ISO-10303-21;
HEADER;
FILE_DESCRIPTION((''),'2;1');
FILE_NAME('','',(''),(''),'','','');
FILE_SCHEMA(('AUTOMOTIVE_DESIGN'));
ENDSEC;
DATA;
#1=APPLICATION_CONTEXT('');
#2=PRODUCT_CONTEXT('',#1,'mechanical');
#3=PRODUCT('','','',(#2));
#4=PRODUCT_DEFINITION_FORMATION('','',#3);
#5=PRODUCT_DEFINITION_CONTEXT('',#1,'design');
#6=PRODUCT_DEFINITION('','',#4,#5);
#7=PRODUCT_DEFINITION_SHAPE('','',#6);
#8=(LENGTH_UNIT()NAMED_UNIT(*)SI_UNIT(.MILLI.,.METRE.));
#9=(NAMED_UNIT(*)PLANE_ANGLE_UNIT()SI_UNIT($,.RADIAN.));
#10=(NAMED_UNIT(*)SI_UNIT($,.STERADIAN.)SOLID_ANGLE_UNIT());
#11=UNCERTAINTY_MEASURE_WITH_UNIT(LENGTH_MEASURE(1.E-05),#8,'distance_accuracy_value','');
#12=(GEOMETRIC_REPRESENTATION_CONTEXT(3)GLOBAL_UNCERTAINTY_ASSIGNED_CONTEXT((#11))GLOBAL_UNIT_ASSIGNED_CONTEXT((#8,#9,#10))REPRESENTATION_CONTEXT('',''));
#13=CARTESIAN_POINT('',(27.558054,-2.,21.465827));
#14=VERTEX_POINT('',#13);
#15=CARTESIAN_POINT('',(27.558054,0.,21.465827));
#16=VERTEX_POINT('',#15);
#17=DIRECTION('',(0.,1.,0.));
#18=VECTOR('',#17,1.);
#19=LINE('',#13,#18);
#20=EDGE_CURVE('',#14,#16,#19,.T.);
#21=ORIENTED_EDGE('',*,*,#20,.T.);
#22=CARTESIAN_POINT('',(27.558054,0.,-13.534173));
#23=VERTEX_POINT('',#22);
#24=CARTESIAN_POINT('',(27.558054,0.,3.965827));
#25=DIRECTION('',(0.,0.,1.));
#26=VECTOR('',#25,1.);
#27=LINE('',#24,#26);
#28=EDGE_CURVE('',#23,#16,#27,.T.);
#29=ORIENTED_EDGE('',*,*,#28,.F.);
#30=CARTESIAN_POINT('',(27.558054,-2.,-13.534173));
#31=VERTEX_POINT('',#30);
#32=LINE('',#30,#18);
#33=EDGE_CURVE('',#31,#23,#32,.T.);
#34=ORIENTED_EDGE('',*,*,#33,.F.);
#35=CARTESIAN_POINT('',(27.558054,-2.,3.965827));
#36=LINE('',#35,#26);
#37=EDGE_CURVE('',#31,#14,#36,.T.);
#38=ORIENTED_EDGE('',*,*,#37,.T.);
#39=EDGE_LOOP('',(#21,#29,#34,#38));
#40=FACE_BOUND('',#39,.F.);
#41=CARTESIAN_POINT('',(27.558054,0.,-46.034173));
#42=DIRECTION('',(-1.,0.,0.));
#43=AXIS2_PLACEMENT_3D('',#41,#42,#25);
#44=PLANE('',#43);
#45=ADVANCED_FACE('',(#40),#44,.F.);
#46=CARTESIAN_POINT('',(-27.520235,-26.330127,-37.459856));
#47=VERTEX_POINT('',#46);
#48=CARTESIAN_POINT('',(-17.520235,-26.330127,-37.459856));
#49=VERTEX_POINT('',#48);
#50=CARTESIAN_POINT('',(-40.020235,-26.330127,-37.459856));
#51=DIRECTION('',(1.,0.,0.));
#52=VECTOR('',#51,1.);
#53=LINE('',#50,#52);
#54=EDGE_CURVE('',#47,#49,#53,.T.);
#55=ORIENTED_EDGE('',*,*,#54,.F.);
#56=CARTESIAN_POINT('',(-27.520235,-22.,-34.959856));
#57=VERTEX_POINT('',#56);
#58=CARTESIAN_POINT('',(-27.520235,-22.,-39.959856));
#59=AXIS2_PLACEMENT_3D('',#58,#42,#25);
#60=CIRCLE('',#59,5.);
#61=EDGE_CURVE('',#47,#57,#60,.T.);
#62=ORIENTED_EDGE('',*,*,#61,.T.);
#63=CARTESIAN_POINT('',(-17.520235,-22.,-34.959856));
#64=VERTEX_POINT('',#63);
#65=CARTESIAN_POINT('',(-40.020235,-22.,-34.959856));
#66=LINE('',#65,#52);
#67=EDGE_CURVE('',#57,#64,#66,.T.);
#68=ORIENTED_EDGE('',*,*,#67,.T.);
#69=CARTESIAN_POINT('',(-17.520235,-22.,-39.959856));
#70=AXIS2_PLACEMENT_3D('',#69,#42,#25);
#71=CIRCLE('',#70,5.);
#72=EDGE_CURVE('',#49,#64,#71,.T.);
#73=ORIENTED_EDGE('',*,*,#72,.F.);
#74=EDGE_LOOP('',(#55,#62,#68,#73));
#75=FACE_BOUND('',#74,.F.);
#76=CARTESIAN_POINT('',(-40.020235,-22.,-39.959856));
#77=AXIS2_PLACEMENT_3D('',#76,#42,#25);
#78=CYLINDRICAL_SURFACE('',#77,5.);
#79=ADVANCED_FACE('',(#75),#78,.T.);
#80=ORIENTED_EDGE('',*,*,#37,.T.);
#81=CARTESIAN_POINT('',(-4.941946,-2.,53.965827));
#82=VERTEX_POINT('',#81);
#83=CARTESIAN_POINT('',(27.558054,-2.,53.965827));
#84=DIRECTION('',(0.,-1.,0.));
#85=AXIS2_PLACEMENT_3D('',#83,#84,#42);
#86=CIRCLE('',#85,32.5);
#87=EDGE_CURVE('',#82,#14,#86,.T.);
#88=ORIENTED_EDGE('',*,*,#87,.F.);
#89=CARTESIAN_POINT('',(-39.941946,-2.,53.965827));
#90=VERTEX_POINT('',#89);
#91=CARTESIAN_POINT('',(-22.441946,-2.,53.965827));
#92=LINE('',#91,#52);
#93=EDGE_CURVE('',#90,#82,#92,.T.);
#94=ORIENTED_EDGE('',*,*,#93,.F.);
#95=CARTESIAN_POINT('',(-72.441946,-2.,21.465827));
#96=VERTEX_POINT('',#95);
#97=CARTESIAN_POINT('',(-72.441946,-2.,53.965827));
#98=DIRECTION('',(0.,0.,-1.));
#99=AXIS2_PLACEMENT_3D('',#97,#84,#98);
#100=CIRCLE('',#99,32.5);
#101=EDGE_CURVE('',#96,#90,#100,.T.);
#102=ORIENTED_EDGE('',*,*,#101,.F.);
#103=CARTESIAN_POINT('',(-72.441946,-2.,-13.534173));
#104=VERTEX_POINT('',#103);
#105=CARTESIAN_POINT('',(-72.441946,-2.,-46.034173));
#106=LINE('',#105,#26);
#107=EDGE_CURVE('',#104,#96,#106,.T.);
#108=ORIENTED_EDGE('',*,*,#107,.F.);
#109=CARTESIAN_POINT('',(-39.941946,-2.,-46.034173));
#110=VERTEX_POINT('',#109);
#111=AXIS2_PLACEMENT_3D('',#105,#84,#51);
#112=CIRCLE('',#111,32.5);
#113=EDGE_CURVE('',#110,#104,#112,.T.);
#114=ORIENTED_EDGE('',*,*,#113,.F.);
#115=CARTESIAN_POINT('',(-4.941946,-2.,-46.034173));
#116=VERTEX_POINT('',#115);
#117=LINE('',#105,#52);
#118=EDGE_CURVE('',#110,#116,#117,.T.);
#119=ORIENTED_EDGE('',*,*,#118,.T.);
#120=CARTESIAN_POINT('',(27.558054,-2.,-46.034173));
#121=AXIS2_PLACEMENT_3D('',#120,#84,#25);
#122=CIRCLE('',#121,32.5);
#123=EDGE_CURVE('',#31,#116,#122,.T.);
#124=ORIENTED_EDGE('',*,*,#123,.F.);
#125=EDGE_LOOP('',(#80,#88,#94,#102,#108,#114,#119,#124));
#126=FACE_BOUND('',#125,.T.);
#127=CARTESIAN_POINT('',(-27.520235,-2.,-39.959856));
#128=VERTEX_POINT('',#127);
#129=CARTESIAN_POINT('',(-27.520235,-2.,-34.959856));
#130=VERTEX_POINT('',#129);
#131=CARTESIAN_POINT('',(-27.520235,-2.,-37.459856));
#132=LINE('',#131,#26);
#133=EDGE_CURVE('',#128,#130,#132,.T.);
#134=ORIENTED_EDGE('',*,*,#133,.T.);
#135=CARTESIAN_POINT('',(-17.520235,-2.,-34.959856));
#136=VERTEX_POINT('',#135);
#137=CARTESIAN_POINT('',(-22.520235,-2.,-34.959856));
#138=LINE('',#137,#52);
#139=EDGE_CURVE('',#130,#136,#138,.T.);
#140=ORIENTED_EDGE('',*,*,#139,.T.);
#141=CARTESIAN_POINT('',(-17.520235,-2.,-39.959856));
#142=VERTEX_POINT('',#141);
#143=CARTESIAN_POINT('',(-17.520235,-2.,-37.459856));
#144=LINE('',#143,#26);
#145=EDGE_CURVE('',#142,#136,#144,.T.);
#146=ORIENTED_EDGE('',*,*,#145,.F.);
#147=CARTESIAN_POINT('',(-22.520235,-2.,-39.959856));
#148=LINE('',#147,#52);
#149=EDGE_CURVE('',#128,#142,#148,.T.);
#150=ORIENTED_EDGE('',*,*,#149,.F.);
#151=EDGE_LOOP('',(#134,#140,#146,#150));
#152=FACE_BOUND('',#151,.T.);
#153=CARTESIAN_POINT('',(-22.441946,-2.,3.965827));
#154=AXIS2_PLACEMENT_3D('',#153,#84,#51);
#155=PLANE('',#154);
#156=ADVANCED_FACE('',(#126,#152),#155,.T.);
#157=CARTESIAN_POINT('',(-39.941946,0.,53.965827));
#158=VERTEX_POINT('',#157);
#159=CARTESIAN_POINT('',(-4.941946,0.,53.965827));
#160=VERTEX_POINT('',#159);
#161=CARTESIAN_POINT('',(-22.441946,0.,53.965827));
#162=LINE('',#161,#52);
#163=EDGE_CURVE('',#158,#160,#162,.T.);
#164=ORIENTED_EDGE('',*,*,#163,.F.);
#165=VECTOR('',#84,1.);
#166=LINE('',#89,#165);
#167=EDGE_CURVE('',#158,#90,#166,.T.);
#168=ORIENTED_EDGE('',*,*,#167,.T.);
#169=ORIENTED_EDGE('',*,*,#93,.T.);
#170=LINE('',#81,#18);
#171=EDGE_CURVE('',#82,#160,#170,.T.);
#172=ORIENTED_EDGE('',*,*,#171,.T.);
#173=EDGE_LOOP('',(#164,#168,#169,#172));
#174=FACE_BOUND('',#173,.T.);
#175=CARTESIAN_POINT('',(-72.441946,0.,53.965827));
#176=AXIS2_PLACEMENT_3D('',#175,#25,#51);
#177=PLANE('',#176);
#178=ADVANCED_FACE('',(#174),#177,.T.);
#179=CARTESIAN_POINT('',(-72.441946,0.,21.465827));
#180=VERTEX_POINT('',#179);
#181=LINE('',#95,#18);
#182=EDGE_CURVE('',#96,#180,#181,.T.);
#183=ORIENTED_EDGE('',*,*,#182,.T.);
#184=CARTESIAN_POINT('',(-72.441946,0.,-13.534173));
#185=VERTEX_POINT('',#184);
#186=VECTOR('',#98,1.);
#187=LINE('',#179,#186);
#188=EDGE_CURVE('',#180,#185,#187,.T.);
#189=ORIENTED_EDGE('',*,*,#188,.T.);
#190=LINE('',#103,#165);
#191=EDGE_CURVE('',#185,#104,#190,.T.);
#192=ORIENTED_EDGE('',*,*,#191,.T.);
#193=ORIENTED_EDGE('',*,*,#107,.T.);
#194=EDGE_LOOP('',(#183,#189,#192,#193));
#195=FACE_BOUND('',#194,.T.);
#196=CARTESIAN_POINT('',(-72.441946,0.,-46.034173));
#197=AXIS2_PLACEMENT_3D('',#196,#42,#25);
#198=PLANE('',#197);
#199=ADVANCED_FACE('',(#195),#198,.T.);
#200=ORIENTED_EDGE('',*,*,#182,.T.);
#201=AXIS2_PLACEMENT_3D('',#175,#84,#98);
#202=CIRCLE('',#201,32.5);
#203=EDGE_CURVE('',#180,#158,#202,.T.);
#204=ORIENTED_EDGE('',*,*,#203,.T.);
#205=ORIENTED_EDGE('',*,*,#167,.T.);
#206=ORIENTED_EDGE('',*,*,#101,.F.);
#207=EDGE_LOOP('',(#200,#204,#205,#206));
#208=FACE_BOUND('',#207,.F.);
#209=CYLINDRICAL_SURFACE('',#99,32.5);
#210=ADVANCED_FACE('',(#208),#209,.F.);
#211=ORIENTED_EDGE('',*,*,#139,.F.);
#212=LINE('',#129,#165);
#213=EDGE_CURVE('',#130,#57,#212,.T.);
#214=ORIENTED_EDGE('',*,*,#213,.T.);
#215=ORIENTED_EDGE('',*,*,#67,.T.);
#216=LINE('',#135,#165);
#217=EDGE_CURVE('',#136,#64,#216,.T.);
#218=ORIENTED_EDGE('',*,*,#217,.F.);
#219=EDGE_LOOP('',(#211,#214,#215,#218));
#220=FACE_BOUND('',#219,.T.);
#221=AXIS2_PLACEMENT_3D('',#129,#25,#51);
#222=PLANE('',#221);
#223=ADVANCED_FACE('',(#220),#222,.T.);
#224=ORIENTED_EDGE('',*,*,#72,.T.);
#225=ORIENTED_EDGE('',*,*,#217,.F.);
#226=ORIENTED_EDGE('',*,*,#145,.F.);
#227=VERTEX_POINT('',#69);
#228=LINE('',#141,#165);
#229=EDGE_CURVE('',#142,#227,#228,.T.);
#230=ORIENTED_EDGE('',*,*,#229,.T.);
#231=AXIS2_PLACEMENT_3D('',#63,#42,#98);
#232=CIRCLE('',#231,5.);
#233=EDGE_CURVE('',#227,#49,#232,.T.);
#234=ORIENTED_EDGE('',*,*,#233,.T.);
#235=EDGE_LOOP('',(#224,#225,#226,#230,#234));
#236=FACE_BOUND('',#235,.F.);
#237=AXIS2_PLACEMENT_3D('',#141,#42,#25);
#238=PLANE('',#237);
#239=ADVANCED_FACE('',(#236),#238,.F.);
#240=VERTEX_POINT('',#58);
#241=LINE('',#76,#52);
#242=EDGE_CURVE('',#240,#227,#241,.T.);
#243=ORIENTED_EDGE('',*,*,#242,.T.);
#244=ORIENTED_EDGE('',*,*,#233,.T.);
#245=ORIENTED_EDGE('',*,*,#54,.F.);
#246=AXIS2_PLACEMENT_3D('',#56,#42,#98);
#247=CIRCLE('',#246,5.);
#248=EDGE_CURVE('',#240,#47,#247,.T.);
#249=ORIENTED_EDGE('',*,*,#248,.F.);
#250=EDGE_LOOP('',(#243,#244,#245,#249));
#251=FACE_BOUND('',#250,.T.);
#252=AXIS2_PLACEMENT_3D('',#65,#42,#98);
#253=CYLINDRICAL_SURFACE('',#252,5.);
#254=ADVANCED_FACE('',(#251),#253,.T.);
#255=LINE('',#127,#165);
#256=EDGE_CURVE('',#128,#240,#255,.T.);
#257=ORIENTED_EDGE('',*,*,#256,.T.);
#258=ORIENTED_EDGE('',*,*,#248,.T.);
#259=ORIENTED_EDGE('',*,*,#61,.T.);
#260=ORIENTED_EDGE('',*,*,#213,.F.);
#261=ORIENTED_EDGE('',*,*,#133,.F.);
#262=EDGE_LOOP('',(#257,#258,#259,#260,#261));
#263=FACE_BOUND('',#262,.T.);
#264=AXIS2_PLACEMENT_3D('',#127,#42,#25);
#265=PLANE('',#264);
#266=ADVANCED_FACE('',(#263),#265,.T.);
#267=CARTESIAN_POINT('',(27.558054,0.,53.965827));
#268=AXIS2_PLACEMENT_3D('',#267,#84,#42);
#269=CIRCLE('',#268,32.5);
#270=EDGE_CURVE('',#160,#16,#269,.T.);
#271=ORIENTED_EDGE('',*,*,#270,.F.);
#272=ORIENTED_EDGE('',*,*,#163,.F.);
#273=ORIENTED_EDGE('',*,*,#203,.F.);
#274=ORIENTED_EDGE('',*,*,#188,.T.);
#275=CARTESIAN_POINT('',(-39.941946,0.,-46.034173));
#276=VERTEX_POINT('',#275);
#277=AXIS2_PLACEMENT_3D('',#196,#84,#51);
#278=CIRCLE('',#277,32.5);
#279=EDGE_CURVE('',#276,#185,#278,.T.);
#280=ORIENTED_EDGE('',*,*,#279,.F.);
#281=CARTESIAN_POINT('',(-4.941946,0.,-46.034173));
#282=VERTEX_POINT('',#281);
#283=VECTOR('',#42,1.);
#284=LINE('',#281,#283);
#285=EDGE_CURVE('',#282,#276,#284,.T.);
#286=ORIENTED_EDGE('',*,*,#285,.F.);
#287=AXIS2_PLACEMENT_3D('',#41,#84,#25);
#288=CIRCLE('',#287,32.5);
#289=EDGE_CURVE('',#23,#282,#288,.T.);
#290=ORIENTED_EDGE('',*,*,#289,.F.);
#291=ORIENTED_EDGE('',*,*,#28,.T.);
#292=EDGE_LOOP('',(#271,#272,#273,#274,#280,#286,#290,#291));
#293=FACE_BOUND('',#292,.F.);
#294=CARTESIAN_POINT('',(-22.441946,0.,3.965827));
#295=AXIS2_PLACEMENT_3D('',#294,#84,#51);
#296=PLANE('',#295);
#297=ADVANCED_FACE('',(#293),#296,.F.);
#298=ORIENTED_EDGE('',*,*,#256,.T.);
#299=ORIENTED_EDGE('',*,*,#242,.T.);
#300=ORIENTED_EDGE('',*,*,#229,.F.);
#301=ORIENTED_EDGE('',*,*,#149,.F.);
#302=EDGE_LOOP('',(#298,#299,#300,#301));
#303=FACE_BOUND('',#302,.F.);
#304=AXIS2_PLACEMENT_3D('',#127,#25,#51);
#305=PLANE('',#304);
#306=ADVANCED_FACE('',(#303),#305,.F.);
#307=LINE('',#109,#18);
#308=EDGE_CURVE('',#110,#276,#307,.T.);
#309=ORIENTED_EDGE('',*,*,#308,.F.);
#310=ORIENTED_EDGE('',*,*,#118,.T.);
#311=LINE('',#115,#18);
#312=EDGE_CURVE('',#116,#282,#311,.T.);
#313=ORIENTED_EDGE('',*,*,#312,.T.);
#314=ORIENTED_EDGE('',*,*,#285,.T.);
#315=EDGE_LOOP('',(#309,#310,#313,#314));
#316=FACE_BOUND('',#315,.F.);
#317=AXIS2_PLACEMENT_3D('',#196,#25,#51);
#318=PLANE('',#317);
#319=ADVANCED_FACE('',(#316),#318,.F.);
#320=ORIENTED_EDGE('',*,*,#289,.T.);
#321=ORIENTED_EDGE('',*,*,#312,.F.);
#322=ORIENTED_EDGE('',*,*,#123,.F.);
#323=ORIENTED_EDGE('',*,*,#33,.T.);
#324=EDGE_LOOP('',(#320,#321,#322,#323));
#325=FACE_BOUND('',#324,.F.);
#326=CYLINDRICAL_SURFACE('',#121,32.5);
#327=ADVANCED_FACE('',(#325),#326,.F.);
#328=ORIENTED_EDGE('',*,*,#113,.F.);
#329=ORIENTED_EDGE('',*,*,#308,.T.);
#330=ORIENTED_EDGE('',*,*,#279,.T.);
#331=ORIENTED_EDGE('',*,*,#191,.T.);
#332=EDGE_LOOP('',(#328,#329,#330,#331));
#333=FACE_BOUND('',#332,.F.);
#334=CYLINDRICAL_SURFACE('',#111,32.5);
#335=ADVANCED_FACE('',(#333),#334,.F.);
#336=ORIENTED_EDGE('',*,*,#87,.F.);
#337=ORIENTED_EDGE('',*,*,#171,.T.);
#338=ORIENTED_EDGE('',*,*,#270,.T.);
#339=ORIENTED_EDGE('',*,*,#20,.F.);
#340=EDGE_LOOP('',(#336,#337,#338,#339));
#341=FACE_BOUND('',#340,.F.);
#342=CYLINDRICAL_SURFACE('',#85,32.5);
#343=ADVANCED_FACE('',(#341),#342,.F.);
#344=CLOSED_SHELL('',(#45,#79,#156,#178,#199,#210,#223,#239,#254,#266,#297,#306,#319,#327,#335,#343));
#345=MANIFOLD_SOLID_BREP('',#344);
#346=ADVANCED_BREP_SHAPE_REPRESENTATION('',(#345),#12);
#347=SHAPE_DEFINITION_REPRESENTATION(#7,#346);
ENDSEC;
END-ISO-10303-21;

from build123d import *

# Parameters (mm, degrees)
F0_W        = 100
F0_H        = 100
F1_DEPTH    = 2
F3_DEPTH    = 25
F5_DEPTH    = 25
F6_W        = 10
F6_H        = 5
F7_DEPTH    = 25
F8_T1_DEPTH = 35


# Not quite as in the source:
# - a fillet or chamfer that OpenCascade refuses, or shapes differently, is made with other operations: its cross-section is extruded or revolved along the edge and cut away or added


with BuildPart() as f1:
    # F0 (on Front) → F1 (new body)
    with BuildSketch(Plane.XZ):
        with Locations((-22.4419460681, 3.9658267051)):
            Rectangle(F0_W, F0_H)
    extrude(amount=F1_DEPTH)

    # F2 (on face) → F3 (cut)
    with BuildSketch(Plane.XZ.offset(2)):
        with BuildLine():
            ThreePointArc((-72.4419460681, -13.5341732949), (-95.4229164567, -69.0151436835), (-39.9419460681, -46.0341732949))
            Line((-39.9419460681, -46.0341732949), (-72.4419460681, -46.0341732949))
            Line((-72.4419460681, -46.0341732949), (-72.4419460681, -13.5341732949))
        make_face()
        with BuildLine():
            Line((-72.4419460681, 53.9658267051), (-39.9419460681, 53.9658267051))
            ThreePointArc((-39.9419460681, 53.9658267051), (-95.4229164567, 76.9467970937), (-72.4419460681, 21.4658267051))
            Line((-72.4419460681, 21.4658267051), (-72.4419460681, 53.9658267051))
        make_face()
        with BuildLine():
            ThreePointArc((-72.4419460681, 21.4658267051), (-49.4609756796, 30.9848563165), (-39.9419460681, 53.9658267051))
            Line((-39.9419460681, 53.9658267051), (-72.4419460681, 53.9658267051))
            Line((-72.4419460681, 53.9658267051), (-72.4419460681, 21.4658267051))
        make_face()
        with BuildLine():
            Line((27.5580539319, 53.9658267051), (27.5580539319, 21.4658267051))
            ThreePointArc((27.5580539319, 21.4658267051), (50.5390243204, 30.9848563165), (60.0580539319, 53.9658267051))
            ThreePointArc((60.0580539319, 53.9658267051), (27.5580539319, 86.4658267051), (-4.9419460681, 53.9658267051))
            Line((-4.9419460681, 53.9658267051), (27.5580539319, 53.9658267051))
        make_face()
        with BuildLine():
            ThreePointArc((-4.9419460681, 53.9658267051), (4.5770835433, 30.9848563165), (27.5580539319, 21.4658267051))
            Line((27.5580539319, 21.4658267051), (27.5580539319, 53.9658267051))
            Line((27.5580539319, 53.9658267051), (-4.9419460681, 53.9658267051))
        make_face()
        with BuildLine():
            ThreePointArc((-4.9419460681, -46.0341732949), (27.5580539319, -78.5341732949), (60.0580539319, -46.0341732949))
            ThreePointArc((60.0580539319, -46.0341732949), (50.5390243204, -23.0532029063), (27.5580539319, -13.5341732949))
            Line((27.5580539319, -13.5341732949), (27.5580539319, -46.0341732949))
            Line((27.5580539319, -46.0341732949), (-4.9419460681, -46.0341732949))
        make_face()
        with BuildLine():
            Line((27.5580539319, -46.0341732949), (27.5580539319, -13.5341732949))
            ThreePointArc((27.5580539319, -13.5341732949), (4.5770835433, -23.0532029063), (-4.9419460681, -46.0341732949))
            Line((-4.9419460681, -46.0341732949), (27.5580539319, -46.0341732949))
        make_face()
    extrude(amount=-F3_DEPTH, mode=Mode.SUBTRACT)

    # F4 (on face) → F5 (cut)
    with BuildSketch(Plane.XZ.offset(2)):
        with BuildLine():
            ThreePointArc((-72.4419460681, -13.5341732949), (-95.4229164567, -69.0151436835), (-39.9419460681, -46.0341732949))
            Line((-39.9419460681, -46.0341732949), (-72.4419460681, -46.0341732949))
            Line((-72.4419460681, -46.0341732949), (-72.4419460681, -13.5341732949))
        make_face()
        with BuildLine():
            Line((-72.4419460681, -46.0341732949), (-39.9419460681, -46.0341732949))
            ThreePointArc((-39.9419460681, -46.0341732949), (-49.4609756796, -23.0532029063), (-72.4419460681, -13.5341732949))
            Line((-72.4419460681, -13.5341732949), (-72.4419460681, -46.0341732949))
        make_face()
    extrude(amount=-F5_DEPTH, mode=Mode.SUBTRACT)

    # F6 (on face) → F7 (join)
    with BuildSketch(Plane.XZ.offset(2)):
        with Locations((-22.5202348083, -37.4598563993)):
            Rectangle(F6_W, F6_H)
    extrude(amount=F7_DEPTH)

    # F8: fillet of radius 5 on 2 edges, made by hand

    # F8_s2 → F8_t1 (cut)
    with BuildSketch(Plane.YZ.offset(-40.0202348083)):
        with BuildLine():
            ThreePointArc((-22, -34.9598563993), (-25.5355339059, -36.4243224934), (-27, -39.9598563993))
            Line((-27, -39.9598563993), (-27, -34.9598563993))
            Line((-27, -34.9598563993), (-22, -34.9598563993))
        make_face()
        with BuildLine():
            ThreePointArc((-22, -39.9598563993), (-25.5355339059, -38.4953903053), (-27, -34.9598563993))
            Line((-27, -34.9598563993), (-27, -39.9598563993))
            Line((-27, -39.9598563993), (-22, -39.9598563993))
        make_face()
    extrude(amount=F8_T1_DEPTH, mode=Mode.SUBTRACT)


solid = f1.part
